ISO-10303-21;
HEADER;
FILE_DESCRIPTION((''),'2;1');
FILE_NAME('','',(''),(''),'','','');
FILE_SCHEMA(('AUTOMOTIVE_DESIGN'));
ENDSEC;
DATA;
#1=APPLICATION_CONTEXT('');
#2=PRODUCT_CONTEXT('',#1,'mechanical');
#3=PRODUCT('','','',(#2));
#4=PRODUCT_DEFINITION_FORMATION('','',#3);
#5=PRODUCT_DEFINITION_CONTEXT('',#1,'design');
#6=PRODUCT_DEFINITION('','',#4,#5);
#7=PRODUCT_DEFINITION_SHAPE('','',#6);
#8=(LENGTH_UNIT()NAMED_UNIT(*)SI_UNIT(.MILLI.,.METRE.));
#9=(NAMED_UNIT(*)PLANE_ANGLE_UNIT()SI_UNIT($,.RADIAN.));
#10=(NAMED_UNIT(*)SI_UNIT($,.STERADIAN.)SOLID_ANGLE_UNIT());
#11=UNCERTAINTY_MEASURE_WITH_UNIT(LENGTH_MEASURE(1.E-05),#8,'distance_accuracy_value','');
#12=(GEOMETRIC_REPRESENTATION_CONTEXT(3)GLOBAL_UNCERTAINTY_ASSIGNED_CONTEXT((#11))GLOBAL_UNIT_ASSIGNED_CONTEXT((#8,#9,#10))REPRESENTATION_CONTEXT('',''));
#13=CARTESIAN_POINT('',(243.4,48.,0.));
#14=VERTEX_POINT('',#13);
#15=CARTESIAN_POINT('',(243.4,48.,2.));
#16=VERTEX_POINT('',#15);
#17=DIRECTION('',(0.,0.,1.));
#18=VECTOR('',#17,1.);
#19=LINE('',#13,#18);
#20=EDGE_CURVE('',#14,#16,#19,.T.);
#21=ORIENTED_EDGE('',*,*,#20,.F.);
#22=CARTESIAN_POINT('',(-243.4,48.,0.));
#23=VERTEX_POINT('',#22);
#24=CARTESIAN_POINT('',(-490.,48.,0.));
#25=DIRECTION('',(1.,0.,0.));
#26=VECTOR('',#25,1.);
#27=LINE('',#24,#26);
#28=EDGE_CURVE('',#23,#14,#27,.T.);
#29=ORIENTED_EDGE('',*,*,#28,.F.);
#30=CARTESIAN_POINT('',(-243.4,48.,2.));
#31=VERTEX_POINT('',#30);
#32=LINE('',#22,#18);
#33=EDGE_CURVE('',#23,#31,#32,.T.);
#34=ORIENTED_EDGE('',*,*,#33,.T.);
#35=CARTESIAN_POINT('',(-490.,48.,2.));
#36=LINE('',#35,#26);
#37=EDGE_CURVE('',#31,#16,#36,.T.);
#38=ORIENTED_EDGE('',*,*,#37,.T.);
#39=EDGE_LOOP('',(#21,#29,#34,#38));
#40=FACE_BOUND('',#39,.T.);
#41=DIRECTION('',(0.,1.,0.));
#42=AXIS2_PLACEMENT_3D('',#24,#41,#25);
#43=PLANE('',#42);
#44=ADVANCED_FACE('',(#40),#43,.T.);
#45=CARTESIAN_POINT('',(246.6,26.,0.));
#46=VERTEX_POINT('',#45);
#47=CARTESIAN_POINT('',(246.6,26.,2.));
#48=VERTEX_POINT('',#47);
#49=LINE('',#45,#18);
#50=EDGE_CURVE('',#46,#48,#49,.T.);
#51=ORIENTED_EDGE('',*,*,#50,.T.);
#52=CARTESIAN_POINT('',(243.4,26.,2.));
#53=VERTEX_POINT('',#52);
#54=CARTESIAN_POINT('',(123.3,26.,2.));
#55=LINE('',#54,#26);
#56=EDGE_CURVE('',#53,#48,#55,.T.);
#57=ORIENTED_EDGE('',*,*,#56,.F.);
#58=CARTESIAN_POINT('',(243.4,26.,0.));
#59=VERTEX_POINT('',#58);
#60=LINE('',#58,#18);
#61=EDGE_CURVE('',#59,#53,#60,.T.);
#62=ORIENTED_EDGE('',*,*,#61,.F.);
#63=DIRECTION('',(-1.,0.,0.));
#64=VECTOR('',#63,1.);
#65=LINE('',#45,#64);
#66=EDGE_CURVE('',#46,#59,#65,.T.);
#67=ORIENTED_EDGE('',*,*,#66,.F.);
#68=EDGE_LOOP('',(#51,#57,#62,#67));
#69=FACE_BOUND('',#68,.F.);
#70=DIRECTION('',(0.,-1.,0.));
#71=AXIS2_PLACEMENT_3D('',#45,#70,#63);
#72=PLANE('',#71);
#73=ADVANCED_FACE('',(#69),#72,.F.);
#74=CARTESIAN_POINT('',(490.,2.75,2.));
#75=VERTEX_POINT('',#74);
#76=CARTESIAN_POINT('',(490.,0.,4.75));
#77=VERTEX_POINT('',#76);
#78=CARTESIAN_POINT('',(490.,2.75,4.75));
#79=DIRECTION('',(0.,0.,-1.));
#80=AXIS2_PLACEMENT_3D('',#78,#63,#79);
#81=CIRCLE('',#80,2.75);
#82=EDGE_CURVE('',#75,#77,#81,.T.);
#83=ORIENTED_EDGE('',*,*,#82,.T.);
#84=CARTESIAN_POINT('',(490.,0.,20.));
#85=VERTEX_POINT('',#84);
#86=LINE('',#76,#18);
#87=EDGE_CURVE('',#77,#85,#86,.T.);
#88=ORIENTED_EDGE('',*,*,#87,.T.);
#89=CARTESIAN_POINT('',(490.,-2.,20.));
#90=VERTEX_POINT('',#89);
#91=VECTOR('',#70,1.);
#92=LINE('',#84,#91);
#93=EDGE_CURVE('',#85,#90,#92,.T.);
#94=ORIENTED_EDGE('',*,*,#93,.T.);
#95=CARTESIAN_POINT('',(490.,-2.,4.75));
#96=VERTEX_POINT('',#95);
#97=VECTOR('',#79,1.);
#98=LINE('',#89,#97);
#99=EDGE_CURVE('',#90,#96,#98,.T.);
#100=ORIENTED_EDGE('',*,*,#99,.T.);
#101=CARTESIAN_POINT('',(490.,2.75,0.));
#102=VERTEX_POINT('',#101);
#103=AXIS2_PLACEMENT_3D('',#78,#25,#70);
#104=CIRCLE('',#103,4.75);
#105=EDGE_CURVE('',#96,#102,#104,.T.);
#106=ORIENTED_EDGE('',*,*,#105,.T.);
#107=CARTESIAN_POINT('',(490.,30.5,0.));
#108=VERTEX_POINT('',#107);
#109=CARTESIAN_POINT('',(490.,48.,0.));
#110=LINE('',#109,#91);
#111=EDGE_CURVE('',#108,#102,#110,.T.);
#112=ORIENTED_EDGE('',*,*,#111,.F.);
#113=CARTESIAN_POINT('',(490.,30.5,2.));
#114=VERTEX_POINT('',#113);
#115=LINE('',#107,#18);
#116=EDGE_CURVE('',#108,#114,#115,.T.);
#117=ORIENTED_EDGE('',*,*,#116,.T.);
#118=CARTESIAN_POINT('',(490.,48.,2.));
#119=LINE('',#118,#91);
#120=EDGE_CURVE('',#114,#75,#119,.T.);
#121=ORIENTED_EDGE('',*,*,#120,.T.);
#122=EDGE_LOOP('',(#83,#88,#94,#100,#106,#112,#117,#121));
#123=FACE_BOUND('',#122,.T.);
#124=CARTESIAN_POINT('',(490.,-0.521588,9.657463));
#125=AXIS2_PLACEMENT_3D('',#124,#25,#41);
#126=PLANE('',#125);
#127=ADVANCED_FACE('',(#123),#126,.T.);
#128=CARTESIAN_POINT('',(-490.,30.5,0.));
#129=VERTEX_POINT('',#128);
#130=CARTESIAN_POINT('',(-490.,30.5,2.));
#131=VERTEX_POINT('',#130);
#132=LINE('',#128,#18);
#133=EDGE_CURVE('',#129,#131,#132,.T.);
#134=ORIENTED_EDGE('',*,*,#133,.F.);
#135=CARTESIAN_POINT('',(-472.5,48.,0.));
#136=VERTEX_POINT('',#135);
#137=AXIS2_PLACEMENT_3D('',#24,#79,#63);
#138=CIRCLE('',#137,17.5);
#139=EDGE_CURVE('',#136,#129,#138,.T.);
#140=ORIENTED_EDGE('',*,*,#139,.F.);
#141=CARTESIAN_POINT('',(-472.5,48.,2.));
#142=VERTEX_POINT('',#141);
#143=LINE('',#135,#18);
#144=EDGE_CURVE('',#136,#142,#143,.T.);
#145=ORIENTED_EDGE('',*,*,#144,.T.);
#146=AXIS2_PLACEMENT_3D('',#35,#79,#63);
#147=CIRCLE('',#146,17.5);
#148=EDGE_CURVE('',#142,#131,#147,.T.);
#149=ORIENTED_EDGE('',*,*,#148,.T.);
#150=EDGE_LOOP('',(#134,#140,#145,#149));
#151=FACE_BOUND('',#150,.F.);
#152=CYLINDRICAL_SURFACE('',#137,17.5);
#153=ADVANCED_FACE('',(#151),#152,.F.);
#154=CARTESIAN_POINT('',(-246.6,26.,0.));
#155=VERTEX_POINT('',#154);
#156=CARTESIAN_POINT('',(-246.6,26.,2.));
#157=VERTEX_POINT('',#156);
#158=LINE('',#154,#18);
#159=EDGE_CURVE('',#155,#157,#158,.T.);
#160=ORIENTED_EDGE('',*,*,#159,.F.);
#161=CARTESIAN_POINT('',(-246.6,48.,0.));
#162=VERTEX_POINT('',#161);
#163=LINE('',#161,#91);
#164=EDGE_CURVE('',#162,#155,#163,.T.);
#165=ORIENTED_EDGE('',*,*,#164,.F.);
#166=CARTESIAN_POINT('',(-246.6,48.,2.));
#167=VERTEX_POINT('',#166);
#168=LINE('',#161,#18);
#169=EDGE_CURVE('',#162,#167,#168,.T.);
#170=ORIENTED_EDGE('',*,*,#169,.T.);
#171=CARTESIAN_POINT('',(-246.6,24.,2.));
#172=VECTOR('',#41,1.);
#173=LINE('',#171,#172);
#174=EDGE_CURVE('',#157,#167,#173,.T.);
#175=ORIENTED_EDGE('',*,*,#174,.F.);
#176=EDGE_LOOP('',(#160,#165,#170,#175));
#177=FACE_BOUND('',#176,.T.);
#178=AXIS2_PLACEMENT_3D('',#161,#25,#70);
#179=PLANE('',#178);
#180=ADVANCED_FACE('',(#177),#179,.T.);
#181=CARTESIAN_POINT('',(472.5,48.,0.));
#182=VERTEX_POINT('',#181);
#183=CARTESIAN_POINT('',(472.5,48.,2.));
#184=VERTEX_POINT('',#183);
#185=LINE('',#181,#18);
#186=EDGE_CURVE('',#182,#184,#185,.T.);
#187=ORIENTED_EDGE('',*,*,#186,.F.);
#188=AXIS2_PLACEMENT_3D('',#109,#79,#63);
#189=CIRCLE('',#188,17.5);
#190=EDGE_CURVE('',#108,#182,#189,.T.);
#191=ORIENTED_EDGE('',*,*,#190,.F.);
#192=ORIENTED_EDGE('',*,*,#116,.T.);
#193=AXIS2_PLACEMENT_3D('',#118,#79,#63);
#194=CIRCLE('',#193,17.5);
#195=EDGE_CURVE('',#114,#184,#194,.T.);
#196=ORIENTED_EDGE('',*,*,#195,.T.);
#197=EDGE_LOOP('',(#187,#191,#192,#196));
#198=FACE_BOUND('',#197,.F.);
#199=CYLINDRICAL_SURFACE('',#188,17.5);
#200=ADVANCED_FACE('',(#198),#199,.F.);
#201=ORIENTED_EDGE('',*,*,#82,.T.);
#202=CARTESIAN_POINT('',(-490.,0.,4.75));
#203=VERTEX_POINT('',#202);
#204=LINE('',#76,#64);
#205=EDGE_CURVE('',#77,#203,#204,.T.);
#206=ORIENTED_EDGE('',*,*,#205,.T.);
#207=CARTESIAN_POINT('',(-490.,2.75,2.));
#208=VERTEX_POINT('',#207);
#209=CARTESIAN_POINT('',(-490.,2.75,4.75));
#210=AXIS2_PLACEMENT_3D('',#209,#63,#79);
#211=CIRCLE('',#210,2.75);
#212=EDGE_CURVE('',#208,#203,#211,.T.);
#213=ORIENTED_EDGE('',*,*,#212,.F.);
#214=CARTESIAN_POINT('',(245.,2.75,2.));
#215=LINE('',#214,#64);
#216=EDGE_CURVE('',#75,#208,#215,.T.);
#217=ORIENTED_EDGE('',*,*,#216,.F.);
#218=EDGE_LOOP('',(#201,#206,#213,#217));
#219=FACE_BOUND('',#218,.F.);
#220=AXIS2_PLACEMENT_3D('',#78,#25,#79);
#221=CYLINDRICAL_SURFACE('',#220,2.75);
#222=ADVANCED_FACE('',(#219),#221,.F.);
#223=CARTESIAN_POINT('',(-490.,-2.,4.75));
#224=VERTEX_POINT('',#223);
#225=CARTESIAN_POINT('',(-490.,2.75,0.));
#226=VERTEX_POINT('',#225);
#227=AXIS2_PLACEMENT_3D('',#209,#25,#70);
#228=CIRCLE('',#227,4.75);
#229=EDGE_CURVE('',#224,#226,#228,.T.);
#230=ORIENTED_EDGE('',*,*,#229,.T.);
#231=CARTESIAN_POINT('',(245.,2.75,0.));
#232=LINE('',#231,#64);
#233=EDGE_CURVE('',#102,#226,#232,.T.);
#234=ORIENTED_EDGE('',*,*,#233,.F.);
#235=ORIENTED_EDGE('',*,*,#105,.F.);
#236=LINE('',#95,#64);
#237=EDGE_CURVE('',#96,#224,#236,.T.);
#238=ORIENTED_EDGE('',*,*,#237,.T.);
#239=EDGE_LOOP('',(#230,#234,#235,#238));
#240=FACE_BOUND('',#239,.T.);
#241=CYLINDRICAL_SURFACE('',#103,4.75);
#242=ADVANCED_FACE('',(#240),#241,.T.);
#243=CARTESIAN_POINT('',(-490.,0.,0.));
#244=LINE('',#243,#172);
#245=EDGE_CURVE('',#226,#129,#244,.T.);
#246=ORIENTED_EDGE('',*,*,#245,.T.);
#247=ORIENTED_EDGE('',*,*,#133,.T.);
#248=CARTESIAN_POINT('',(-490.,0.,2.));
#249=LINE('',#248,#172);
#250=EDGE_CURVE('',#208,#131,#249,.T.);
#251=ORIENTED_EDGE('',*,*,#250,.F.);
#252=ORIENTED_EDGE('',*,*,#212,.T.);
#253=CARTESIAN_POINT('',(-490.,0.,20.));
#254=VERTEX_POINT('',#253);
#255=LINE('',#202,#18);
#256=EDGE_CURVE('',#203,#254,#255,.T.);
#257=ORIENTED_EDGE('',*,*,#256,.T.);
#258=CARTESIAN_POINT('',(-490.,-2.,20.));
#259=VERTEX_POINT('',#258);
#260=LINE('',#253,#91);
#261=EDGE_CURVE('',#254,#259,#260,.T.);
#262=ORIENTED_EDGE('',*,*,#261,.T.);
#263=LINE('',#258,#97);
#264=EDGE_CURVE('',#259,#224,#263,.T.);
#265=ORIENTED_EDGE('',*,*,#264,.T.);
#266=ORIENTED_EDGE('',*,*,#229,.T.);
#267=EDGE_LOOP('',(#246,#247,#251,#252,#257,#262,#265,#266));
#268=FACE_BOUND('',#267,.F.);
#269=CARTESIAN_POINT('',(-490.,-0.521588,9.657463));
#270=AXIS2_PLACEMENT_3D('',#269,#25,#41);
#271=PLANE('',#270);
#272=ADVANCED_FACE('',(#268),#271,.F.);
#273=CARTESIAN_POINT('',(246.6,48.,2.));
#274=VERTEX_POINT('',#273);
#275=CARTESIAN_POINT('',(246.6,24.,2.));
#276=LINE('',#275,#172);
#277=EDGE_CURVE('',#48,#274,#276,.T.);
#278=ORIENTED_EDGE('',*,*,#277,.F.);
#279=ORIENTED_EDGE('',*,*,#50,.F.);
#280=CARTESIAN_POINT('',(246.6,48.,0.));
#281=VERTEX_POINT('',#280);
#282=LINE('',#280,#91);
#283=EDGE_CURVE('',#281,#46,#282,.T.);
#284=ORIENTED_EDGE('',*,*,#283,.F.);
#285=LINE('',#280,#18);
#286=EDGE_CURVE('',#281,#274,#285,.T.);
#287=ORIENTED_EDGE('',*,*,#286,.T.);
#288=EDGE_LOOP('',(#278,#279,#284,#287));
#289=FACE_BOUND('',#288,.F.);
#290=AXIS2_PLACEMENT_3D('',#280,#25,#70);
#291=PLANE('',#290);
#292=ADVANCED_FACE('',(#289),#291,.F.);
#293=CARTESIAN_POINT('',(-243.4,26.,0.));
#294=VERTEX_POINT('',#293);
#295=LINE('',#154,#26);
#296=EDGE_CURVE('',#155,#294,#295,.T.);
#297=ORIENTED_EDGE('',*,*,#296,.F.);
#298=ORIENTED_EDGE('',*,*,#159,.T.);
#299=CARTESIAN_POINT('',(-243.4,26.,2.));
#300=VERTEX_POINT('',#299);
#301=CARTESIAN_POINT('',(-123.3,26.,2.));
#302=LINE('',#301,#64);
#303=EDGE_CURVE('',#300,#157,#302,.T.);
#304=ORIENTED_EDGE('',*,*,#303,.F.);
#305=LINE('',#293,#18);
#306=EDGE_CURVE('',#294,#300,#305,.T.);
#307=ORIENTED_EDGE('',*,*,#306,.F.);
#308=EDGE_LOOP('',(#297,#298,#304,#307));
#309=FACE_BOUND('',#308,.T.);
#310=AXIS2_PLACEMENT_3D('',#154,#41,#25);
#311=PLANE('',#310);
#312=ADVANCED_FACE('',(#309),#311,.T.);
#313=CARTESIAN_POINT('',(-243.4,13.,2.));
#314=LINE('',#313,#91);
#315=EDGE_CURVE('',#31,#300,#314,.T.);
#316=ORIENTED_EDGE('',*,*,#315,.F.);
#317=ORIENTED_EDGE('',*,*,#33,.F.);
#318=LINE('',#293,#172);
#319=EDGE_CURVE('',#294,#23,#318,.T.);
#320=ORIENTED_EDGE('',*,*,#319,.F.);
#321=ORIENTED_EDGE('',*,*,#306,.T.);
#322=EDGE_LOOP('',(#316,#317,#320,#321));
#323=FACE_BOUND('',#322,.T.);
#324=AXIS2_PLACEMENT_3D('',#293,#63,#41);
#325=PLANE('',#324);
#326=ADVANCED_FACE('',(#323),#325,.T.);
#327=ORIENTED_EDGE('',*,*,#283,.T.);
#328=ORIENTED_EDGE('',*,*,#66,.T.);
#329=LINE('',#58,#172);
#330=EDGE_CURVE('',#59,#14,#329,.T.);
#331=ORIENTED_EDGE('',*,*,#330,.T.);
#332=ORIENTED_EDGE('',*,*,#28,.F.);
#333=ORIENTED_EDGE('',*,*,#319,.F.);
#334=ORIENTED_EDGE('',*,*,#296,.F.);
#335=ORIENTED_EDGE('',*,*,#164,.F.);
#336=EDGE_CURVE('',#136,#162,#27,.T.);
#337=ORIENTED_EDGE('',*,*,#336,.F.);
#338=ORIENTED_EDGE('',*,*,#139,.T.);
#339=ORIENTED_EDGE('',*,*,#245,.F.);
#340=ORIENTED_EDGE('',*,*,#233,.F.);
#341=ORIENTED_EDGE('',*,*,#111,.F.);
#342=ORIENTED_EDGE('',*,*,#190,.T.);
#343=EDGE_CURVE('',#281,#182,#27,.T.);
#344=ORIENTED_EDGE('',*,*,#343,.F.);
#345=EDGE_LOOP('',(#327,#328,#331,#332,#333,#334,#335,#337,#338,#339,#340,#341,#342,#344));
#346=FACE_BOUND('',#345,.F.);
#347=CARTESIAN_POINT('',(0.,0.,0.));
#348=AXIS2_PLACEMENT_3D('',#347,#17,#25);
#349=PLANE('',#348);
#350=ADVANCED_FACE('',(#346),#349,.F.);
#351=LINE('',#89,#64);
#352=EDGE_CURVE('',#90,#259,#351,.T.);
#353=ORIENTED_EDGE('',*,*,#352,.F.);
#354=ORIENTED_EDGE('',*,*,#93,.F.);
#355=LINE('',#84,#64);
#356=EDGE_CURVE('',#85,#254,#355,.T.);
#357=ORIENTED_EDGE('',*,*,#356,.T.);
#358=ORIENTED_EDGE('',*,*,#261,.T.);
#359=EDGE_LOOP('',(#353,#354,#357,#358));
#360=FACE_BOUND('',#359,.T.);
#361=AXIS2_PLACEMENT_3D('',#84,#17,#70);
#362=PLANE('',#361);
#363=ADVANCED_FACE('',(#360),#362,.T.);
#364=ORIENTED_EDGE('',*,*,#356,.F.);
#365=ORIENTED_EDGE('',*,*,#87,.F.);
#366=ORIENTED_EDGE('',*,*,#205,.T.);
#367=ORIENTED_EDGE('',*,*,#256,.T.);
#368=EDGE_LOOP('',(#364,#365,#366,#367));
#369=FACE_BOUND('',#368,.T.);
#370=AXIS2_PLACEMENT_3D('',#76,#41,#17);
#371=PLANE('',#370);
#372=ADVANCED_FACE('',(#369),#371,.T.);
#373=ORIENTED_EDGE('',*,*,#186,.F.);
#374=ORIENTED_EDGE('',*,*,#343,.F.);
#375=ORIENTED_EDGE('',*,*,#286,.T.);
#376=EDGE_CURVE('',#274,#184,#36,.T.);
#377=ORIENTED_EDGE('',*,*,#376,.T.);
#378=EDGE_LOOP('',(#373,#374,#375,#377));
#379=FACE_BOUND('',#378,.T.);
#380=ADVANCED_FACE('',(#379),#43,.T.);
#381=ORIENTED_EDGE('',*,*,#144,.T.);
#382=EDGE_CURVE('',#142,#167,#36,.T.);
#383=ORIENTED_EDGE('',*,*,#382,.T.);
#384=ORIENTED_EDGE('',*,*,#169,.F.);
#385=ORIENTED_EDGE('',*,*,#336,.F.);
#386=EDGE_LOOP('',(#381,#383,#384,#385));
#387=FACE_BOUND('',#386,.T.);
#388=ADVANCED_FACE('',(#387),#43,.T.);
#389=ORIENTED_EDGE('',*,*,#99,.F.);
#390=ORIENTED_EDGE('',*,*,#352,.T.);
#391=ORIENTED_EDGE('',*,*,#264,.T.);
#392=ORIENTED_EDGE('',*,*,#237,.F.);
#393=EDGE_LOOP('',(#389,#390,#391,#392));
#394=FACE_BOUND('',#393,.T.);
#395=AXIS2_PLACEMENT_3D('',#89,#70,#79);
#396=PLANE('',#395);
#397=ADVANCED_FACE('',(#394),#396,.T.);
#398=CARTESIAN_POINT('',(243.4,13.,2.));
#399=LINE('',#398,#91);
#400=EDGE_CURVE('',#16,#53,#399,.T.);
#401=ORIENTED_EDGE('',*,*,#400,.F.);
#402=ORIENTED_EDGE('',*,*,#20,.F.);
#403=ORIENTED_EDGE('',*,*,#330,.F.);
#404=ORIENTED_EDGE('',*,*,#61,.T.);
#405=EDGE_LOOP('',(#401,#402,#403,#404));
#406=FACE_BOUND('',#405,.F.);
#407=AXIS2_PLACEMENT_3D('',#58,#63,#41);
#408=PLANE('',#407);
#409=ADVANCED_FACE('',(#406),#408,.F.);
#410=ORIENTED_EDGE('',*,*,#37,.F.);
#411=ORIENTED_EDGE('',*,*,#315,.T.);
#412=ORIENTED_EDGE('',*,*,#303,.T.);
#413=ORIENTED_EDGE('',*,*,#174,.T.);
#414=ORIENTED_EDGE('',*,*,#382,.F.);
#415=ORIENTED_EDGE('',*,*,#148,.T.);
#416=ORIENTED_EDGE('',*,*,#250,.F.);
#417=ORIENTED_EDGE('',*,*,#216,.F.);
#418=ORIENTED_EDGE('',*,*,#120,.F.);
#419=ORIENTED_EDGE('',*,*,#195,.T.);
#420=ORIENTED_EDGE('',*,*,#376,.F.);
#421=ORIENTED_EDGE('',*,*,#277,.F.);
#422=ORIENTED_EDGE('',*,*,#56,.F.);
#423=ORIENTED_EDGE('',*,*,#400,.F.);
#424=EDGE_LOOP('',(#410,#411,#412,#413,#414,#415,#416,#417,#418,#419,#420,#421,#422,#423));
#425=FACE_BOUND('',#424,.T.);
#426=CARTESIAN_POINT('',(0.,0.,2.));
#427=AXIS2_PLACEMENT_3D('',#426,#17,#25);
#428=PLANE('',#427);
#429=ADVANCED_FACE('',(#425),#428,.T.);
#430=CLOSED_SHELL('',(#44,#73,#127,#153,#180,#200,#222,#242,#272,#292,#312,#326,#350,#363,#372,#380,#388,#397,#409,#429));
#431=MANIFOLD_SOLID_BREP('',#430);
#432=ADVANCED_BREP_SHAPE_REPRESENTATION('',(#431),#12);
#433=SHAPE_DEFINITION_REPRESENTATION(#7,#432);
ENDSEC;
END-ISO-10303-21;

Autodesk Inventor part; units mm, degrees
ref_plane "YZ Plane" through (0, 0, 0) normal (1, 0, 0) x (0, 1, 0)
ref_plane "XZ Plane" through (0, 0, 0) normal (0, 1, 0) x (-1, 0, 0)
ref_plane "XY Plane" through (0, 0, 0) normal (0, 0, 1) x (1, 0, 0)
sketch "Sketch1" plane through (0, 0, 0) normal (0, 0, 1) x (1, 0, 0)
  line L0 (-490, 48) -> (490, 48)
  line L1 (490, 48) -> (490, 0)
  line L2 (490, 0) -> (-490, 0)
  line L3 (-490, 0) -> (-490, 48)
  point P0 (0, 0)
  point P1 (0, 0)
  dimension "d0" = 980
  dimension "d1" = 48
extrude "Plate1" add sketch "Sketch1" along normal blind 2
sketch "Sketch2" plane through (490, -2, 0) normal (0, 1, 0) x (-1, 0, 0)
  line L0 (980, 0) -> (0, 0)
  line L1 (0, 0) -> (0, 20)
  line L2 (0, 20) -> (980, 20)
  line L3 (980, 20) -> (980, 0)
edge flange "Flange1" height 20 angle 90 thickness 2 bend radius 2.75 thickness toward (0, 1, 0) relief round relief width 2 relief depth 1 edges at (0, 0, 2) wall of the first edge with corners at (-490, -2, 0) (490, -2, 0) (490, -2, 20) (-490, -2, 20)
bend "Bend1"
corner "Corner1"
sketch "Sketch5" plane through (0, 0, 0) normal (0, 0, -1) x (-1, 0, 0)
  line L0 (490, 48) -> (-490, 48) projected
  line L1 (490, -2) -> (-490, -2) projected
  circle A0 centre (0, 48) radius 17.5
  line L2 (243.4, 48) -> (246.6, 48)
  line L3 (246.6, 48) -> (246.6, 26)
  line L4 (246.6, 26) -> (243.4, 26)
  line L5 (243.4, 26) -> (243.4, 48)
  line L6 (-243.4, 48) -> (-246.6, 48)
  line L7 (-246.6, 48) -> (-246.6, 26)
  line L8 (-246.6, 26) -> (-243.4, 26)
  line L9 (-243.4, 26) -> (-243.4, 48)
  line L10 (0, 48) -> (0, -2) construction
  line L11 (490, -2) -> (490, 48)
  line L12 (-490, -2) -> (-490, 48)
  circle A1 centre (-490, 48) radius 17.5
  circle A2 centre (490, 48) radius 17.5
  point P0 (0, 0)
  point P1 (245, 26)
  point P2 (-245, 26)
  point P3 (246.6, 48)
  point P4 (-17.5, 48)
  point P5 (17.5, 48)
  point P6 (-246.6, 48)
  point P7 (472.5, 48)
  point P8 (490, 30.5)
  point P9 (-490, 30.5)
  point P10 (-472.5, 48)
  dimension "d45" = 35
  dimension "d48" = 3.2
  dimension "d49" = 490
  dimension "d51" = 28
  dimension "d52" = 22
extrude "Extrusion1" cut sketch "Sketch5" against normal through all contours L3 L4 L5 L0 | L0 L11 A2 | L9 L8 L7 L0 | L12 L0 A1 picked at (488.702, 36.4796) picked at (-478.4796, 46.702)
sketch "Sketch9" plane through (0, 0, 2) normal (0, 0, 1) x (1, 0, 0)
  line L0 (448.2795, 24.3045) -> (448.2795, 12.3045) construction
  line L1 (448.2795, 12.3045) -> (248.2795, 12.3045) construction
  line L2 (248.2795, 12.3045) -> (248.2795, 24.3045) construction
  line L3 (248.2795, 24.3045) -> (448.2795, 24.3045) construction
  line L4 (-490, 48) -> (490, 48) projected
  point P0 (0, 0)
  point P1 (1.05, 68)
  point P2 (490, 48)
  point P3 (-490, 48)
  dimension "d40" = 200
  dimension "d41" = 12
mark "Mark2"
equation "\"d2\" = Thickness"
equation "\"d3\" = BendReliefWidth"
equation "\"d4\" = BendReliefDepth"
equation "\"d5\" = MinimumRemnant"
equation "\"d6\" = TransitionRadius"
equation "\"d9\" = BendRadius"
equation "\"d10\" = CornerReliefSize"
equation "\"d11\" = GapSize"
equation "\"d12\" = JacobiRadiusSize"
equation "\"BendReliefWidth\" = Thickness"
equation "\"BendReliefDepth\" = 0.5 * Thickness"
equation "\"CornerReliefSize\" = 4 * Thickness"
equation "\"MinimumRemnant\" = 2 * Thickness"
equation "\"TransitionRadius\" = BendRadius"
equation "\"JacobiRadiusSize\" = BendRadius"
equation "\"GapSize\" = Thickness"
equation "\"Thickness\" = 2"
equation "\"BendRadius\" = 2.75"
properties part number "MSC 342 stringer BOARD  ##" material "Stainless Steel"
